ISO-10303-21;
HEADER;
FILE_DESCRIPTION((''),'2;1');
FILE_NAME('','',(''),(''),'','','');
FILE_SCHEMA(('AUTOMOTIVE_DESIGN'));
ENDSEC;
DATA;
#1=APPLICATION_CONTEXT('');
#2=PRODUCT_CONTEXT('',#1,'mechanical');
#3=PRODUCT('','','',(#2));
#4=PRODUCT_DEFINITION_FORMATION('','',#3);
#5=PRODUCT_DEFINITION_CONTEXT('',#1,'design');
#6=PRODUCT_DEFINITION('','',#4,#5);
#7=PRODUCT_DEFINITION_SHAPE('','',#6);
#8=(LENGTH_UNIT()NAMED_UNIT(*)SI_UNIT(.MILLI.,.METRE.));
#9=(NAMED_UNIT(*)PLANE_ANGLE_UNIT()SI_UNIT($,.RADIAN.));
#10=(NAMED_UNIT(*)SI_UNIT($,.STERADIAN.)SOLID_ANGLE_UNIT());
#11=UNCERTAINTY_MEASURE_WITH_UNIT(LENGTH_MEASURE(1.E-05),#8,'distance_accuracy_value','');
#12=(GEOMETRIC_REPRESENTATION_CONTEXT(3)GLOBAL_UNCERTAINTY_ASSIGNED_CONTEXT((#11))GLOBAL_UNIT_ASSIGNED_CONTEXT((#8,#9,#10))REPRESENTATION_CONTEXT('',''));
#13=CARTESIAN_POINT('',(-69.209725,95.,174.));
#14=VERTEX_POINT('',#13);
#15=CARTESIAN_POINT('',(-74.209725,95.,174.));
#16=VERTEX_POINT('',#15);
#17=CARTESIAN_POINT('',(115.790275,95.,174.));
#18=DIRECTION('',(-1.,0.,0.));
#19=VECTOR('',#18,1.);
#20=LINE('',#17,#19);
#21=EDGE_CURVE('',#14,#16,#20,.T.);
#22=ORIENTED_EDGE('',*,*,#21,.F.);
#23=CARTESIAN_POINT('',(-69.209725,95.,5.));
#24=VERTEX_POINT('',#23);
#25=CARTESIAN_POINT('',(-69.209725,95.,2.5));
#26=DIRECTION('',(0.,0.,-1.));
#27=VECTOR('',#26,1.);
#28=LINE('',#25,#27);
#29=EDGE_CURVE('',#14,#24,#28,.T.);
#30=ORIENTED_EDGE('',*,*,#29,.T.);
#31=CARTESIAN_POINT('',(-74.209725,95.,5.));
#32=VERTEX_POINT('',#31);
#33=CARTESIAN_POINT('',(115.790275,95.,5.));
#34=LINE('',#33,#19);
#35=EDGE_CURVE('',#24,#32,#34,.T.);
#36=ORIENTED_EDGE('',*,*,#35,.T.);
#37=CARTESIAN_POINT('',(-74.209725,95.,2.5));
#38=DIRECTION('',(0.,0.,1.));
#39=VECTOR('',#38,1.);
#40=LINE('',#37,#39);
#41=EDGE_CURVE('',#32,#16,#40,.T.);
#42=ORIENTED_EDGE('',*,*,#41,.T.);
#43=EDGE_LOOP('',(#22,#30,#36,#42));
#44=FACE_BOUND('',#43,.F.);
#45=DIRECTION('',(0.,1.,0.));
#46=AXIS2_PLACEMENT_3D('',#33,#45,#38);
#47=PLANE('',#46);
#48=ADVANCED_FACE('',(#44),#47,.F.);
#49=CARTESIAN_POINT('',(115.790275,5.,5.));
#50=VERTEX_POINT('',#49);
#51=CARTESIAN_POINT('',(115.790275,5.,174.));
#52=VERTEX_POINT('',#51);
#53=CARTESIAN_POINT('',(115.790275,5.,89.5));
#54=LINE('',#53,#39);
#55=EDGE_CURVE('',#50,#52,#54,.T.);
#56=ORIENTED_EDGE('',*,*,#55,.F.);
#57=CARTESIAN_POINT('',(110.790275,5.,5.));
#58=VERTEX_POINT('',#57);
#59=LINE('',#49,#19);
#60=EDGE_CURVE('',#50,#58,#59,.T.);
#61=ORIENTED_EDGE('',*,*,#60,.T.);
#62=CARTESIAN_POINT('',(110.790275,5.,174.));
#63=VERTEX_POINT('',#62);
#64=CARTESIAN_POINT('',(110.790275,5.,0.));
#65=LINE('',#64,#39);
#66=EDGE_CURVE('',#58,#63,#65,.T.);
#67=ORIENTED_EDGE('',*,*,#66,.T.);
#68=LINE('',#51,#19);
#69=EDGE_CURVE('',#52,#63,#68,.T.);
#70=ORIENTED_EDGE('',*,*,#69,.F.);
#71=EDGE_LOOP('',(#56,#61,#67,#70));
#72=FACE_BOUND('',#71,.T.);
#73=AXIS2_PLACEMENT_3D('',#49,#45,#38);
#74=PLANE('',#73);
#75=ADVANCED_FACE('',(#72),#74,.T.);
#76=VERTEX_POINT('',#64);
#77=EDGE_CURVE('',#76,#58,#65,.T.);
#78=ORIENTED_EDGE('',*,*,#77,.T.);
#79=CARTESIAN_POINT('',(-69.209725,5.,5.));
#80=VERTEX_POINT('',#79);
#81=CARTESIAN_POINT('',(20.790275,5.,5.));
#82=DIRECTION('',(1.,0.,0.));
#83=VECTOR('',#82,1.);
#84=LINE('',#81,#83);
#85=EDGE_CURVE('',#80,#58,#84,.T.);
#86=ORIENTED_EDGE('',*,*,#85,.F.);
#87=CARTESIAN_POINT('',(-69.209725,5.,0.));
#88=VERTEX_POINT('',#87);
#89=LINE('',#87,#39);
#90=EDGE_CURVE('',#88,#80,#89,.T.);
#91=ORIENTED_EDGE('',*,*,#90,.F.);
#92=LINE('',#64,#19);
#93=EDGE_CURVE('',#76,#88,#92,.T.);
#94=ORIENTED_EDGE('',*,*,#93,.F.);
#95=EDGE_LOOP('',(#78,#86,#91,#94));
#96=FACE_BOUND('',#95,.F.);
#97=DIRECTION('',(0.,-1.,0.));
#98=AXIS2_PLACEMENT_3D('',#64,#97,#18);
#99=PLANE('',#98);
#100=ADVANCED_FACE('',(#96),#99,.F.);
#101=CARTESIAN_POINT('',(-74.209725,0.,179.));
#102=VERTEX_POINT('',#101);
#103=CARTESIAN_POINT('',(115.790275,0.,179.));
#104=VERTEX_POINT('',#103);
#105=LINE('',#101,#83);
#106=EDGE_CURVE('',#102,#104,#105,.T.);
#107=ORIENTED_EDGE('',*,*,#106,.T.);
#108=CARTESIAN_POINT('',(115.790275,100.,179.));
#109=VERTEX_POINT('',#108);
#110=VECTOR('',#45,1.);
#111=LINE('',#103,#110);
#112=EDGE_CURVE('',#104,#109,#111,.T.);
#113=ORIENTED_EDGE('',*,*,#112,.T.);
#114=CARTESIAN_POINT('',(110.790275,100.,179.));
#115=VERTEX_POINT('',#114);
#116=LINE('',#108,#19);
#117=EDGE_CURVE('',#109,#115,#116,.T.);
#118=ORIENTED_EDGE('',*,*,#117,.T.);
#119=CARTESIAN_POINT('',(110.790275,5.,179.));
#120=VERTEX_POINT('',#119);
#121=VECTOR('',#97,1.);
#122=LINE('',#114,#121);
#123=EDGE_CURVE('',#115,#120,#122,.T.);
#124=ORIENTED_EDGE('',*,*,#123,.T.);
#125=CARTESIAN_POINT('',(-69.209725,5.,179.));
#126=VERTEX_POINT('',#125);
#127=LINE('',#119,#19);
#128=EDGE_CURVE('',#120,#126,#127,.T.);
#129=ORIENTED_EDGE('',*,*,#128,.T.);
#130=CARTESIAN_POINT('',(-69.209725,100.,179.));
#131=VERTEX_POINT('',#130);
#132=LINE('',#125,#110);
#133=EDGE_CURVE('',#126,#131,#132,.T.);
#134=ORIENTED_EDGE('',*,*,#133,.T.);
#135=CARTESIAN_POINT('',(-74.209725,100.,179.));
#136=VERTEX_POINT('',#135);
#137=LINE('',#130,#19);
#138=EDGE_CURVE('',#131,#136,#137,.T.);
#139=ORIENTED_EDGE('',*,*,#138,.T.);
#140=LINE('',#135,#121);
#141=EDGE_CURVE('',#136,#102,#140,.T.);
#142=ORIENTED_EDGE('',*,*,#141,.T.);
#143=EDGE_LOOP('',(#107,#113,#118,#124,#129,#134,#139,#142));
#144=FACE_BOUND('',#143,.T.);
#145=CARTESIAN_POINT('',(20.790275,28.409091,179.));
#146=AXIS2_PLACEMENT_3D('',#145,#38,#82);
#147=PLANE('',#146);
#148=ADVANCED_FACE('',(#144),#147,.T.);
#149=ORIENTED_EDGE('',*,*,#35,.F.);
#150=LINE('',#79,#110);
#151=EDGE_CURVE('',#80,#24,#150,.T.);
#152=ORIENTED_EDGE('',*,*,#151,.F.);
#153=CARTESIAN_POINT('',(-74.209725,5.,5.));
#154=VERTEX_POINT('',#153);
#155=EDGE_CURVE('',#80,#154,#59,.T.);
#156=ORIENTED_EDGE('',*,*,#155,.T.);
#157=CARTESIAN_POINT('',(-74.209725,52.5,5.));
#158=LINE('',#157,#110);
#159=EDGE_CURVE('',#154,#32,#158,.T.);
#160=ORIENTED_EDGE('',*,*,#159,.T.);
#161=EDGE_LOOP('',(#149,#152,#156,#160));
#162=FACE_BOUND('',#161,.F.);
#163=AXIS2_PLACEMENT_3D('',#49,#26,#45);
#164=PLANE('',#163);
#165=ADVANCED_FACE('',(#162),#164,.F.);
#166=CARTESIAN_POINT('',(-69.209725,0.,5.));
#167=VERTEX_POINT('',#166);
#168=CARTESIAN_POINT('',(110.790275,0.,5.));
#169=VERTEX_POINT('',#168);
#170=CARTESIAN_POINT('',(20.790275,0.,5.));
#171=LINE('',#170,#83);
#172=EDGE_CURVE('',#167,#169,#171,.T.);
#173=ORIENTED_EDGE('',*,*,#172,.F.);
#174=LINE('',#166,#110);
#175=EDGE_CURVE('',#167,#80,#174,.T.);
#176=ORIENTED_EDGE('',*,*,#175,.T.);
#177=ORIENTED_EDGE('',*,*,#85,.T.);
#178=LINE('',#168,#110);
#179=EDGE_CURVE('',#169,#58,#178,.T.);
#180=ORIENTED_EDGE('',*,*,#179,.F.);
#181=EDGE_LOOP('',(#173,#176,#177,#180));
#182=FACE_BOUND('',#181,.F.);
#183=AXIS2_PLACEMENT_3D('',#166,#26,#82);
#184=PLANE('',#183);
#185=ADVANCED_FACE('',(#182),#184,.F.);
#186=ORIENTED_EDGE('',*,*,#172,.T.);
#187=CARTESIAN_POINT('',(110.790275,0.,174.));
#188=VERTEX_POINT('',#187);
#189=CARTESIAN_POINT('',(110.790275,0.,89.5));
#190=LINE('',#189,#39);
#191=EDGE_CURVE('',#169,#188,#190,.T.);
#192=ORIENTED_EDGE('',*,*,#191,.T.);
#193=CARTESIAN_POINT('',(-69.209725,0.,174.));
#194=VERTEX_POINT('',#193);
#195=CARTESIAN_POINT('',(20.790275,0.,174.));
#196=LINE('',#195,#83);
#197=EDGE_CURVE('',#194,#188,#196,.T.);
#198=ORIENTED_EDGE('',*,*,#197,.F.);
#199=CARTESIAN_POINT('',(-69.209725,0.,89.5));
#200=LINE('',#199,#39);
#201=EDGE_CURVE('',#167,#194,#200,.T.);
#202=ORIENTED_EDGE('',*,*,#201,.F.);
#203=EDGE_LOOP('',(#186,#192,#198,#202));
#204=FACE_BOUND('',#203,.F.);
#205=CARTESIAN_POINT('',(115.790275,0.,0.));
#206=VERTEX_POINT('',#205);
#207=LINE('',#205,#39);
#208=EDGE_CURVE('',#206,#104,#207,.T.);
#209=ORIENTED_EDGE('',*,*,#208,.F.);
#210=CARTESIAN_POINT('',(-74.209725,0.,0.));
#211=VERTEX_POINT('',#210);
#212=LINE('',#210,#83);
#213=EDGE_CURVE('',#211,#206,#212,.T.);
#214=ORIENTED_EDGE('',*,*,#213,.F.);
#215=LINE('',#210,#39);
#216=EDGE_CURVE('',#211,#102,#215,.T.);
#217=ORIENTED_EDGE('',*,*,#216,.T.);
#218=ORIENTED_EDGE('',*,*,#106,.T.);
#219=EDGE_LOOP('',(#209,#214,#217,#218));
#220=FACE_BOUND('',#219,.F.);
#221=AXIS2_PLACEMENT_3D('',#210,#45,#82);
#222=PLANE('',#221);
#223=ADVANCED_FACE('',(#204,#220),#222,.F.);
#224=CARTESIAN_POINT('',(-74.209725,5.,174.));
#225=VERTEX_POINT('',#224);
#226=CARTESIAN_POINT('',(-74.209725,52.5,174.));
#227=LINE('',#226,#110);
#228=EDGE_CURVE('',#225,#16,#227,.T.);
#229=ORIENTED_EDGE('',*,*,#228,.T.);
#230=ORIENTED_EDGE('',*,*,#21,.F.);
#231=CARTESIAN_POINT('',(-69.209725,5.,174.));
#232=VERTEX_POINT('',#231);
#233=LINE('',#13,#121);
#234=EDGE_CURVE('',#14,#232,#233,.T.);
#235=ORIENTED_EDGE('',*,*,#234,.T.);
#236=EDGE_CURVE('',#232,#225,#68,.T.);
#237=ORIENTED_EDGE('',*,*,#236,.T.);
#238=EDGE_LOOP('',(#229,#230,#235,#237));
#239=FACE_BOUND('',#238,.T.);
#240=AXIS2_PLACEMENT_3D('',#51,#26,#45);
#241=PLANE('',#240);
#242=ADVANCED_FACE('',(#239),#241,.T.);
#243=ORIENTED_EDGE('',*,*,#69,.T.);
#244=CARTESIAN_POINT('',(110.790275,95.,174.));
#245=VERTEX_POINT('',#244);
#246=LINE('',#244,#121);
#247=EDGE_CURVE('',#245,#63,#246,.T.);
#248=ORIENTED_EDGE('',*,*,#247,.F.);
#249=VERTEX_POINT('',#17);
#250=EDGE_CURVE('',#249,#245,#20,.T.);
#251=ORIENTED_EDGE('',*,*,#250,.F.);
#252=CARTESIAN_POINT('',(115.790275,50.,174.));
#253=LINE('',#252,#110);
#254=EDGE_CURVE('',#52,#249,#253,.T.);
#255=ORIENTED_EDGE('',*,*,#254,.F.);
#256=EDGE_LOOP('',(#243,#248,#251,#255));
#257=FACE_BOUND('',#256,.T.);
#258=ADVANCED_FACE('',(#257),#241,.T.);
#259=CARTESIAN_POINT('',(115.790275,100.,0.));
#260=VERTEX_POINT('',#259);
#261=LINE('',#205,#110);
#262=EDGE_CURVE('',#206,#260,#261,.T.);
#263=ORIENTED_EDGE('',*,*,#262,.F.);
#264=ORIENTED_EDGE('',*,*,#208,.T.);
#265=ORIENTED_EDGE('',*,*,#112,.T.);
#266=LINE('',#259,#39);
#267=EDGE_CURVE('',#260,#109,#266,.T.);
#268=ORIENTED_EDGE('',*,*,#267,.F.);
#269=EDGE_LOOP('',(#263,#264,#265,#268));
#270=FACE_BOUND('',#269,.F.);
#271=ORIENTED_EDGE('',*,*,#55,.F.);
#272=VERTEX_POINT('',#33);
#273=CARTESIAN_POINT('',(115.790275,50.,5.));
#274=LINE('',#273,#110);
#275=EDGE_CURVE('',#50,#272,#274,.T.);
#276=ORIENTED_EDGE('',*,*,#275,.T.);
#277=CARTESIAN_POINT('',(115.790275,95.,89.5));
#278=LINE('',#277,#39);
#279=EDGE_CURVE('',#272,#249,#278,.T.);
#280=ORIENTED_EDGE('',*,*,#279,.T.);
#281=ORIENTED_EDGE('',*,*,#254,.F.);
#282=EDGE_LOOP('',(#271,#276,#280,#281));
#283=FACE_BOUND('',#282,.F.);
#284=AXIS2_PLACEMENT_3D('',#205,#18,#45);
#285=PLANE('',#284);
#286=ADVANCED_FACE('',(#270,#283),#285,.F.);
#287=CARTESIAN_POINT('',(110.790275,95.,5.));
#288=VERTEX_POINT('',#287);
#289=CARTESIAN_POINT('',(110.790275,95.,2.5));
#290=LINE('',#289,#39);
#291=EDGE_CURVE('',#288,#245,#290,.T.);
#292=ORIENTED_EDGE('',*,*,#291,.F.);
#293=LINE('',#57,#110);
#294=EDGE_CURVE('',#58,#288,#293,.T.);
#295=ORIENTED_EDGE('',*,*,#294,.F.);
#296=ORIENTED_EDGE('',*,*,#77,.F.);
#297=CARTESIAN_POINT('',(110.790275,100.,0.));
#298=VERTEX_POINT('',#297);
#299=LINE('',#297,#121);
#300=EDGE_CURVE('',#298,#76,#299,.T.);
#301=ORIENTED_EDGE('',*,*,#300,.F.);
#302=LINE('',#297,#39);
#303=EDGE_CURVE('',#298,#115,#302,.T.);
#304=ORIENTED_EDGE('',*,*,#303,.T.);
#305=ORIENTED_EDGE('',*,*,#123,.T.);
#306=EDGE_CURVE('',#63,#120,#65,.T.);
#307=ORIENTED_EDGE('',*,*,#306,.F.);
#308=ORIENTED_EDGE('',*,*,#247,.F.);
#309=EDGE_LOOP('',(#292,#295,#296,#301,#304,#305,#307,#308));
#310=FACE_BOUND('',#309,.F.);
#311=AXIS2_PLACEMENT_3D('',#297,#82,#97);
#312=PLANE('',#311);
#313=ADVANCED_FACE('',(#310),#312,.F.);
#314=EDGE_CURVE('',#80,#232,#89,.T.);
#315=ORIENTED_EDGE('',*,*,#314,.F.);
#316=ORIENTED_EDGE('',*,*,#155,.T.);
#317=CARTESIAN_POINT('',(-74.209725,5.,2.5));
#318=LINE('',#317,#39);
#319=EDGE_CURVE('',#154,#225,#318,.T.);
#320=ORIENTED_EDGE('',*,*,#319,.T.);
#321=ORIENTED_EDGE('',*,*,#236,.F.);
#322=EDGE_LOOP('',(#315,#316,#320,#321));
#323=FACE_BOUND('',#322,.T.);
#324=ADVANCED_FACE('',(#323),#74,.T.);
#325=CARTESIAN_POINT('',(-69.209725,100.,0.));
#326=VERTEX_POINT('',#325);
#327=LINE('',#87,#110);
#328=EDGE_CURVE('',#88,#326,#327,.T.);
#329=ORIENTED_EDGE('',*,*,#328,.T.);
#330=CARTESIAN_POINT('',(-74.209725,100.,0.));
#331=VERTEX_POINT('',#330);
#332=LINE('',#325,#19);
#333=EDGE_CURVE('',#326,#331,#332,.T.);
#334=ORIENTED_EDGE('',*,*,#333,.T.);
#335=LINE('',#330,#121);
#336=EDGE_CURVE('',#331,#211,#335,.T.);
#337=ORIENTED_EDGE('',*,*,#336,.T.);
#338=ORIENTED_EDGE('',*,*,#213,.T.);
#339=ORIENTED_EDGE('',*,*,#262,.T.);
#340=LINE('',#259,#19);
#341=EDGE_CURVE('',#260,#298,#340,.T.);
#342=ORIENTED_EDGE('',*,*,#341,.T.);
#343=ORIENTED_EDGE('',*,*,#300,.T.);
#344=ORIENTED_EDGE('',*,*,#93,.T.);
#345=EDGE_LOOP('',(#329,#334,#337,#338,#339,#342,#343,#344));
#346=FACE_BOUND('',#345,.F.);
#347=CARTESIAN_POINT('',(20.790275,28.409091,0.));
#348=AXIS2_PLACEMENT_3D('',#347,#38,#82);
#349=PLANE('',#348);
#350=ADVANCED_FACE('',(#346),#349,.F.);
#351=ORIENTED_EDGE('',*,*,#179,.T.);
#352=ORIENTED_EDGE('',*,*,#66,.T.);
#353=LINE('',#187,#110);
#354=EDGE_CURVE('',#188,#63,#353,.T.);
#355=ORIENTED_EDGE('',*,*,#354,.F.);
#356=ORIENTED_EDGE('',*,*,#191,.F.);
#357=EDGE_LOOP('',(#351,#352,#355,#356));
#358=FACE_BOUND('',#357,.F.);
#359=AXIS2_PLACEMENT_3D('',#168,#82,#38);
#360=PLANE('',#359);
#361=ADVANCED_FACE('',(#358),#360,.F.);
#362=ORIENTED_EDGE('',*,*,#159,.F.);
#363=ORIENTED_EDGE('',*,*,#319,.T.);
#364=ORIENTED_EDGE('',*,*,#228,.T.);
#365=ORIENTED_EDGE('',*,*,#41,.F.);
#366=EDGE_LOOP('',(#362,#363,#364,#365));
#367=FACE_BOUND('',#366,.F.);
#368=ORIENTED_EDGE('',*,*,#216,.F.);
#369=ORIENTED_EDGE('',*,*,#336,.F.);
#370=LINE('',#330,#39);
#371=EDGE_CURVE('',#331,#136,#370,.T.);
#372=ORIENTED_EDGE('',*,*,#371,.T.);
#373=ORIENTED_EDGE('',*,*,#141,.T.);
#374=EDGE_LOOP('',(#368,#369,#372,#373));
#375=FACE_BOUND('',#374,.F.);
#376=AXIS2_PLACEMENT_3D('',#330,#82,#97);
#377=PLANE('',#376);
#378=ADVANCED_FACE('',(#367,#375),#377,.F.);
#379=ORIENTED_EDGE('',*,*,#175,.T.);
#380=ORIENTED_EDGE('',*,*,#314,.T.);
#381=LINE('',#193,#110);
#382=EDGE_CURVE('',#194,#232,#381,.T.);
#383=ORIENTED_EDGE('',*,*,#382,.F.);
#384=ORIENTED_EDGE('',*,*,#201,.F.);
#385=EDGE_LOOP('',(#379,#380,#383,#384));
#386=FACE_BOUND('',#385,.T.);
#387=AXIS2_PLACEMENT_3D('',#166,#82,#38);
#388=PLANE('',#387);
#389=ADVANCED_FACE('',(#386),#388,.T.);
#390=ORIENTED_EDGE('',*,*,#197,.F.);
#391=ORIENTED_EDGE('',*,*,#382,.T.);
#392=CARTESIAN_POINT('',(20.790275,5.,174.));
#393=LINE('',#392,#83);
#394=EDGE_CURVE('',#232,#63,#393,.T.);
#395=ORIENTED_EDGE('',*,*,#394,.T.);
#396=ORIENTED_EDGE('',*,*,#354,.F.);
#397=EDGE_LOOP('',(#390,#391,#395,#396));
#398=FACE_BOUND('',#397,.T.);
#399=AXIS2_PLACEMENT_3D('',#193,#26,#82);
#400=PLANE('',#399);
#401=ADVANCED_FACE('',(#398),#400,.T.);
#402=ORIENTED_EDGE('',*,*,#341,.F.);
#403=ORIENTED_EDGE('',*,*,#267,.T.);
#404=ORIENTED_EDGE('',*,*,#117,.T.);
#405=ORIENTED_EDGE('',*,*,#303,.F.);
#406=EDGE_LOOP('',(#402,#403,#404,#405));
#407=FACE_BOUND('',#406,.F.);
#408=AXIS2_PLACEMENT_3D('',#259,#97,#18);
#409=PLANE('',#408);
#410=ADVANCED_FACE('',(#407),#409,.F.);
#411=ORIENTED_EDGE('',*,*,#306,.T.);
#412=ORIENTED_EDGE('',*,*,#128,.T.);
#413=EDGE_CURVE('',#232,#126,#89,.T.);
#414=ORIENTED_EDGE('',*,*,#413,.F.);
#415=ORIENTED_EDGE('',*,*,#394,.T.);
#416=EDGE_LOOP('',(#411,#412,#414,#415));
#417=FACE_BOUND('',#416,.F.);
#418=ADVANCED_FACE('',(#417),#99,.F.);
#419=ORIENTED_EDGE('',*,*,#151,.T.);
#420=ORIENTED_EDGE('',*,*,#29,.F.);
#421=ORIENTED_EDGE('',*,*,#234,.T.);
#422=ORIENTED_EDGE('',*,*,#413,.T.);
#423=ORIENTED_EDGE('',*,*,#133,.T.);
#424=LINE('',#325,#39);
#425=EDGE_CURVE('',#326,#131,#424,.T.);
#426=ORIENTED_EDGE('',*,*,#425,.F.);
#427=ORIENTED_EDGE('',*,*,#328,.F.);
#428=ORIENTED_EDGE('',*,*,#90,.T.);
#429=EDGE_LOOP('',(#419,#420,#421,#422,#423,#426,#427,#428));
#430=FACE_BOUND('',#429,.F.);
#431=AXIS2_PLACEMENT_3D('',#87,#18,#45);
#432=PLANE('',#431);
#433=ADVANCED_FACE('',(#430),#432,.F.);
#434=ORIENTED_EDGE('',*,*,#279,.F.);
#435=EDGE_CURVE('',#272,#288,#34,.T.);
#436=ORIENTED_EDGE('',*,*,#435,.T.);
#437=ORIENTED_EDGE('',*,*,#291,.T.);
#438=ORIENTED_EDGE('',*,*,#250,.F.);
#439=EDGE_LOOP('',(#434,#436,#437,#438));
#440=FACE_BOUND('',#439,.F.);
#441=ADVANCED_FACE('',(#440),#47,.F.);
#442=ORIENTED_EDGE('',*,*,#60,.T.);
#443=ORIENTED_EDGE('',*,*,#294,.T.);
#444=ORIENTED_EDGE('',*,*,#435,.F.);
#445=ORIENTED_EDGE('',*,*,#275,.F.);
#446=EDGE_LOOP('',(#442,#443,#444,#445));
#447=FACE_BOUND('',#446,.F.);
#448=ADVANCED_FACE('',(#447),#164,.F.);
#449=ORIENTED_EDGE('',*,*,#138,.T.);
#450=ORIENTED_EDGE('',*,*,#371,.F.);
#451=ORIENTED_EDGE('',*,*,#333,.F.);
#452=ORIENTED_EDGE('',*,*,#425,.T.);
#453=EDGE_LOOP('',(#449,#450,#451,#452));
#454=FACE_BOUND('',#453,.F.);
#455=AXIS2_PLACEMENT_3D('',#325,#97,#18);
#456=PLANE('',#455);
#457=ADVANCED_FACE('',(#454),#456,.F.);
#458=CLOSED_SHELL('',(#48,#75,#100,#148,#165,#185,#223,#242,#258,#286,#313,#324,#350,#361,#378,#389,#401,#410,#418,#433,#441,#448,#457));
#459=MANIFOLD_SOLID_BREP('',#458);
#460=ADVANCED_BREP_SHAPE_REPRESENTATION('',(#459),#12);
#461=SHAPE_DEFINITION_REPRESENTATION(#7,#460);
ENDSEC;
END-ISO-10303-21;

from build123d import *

# Parameters (mm, degrees)
F1_DEPTH      = 179
F2_W          = 90.0000002235
F2_H          = 169.0000002235
F3_DEPTH      = 200
F3_DEPTH_BACK = 200
F4_W          = 180.0000002235
F4_H          = 169.0000002235
F5_DEPTH      = 25


# Not quite as in the source:
# - the program builds the solid bodies; features that only make, move or delete a surface that nothing else refers to are left out


with BuildPart() as f1:
    # F0 (on Top) → F1 (new body)
    with BuildSketch(Plane.XY):
        Polygon((-74.2097248461, 100), (-74.2097248461, 0), (115.7902751539, 0), (115.7902751539, 100), (110.7902751539, 100), (110.7902751539, 5), (-69.2097248461, 5), (-69.2097248461, 100), align=None)
    extrude(amount=F1_DEPTH)

    # F2 (on face) → F3 (cut, two sides)
    with BuildSketch(Plane.YZ.offset(115.7902751539)) as f3_sk:
        with Locations((50, 89.5)):
            Rectangle(F2_W, F2_H)
    extrude(amount=F3_DEPTH, mode=Mode.SUBTRACT)
    extrude(f3_sk.sketch, amount=-F3_DEPTH_BACK, mode=Mode.SUBTRACT)

    # F4 (on face) → F5 (cut)
    with BuildSketch(Plane.XZ):
        with Locations((20.7902751539, 89.5)):
            Rectangle(F4_W, F4_H)
    extrude(amount=-F5_DEPTH, mode=Mode.SUBTRACT)


solid = f1.part
